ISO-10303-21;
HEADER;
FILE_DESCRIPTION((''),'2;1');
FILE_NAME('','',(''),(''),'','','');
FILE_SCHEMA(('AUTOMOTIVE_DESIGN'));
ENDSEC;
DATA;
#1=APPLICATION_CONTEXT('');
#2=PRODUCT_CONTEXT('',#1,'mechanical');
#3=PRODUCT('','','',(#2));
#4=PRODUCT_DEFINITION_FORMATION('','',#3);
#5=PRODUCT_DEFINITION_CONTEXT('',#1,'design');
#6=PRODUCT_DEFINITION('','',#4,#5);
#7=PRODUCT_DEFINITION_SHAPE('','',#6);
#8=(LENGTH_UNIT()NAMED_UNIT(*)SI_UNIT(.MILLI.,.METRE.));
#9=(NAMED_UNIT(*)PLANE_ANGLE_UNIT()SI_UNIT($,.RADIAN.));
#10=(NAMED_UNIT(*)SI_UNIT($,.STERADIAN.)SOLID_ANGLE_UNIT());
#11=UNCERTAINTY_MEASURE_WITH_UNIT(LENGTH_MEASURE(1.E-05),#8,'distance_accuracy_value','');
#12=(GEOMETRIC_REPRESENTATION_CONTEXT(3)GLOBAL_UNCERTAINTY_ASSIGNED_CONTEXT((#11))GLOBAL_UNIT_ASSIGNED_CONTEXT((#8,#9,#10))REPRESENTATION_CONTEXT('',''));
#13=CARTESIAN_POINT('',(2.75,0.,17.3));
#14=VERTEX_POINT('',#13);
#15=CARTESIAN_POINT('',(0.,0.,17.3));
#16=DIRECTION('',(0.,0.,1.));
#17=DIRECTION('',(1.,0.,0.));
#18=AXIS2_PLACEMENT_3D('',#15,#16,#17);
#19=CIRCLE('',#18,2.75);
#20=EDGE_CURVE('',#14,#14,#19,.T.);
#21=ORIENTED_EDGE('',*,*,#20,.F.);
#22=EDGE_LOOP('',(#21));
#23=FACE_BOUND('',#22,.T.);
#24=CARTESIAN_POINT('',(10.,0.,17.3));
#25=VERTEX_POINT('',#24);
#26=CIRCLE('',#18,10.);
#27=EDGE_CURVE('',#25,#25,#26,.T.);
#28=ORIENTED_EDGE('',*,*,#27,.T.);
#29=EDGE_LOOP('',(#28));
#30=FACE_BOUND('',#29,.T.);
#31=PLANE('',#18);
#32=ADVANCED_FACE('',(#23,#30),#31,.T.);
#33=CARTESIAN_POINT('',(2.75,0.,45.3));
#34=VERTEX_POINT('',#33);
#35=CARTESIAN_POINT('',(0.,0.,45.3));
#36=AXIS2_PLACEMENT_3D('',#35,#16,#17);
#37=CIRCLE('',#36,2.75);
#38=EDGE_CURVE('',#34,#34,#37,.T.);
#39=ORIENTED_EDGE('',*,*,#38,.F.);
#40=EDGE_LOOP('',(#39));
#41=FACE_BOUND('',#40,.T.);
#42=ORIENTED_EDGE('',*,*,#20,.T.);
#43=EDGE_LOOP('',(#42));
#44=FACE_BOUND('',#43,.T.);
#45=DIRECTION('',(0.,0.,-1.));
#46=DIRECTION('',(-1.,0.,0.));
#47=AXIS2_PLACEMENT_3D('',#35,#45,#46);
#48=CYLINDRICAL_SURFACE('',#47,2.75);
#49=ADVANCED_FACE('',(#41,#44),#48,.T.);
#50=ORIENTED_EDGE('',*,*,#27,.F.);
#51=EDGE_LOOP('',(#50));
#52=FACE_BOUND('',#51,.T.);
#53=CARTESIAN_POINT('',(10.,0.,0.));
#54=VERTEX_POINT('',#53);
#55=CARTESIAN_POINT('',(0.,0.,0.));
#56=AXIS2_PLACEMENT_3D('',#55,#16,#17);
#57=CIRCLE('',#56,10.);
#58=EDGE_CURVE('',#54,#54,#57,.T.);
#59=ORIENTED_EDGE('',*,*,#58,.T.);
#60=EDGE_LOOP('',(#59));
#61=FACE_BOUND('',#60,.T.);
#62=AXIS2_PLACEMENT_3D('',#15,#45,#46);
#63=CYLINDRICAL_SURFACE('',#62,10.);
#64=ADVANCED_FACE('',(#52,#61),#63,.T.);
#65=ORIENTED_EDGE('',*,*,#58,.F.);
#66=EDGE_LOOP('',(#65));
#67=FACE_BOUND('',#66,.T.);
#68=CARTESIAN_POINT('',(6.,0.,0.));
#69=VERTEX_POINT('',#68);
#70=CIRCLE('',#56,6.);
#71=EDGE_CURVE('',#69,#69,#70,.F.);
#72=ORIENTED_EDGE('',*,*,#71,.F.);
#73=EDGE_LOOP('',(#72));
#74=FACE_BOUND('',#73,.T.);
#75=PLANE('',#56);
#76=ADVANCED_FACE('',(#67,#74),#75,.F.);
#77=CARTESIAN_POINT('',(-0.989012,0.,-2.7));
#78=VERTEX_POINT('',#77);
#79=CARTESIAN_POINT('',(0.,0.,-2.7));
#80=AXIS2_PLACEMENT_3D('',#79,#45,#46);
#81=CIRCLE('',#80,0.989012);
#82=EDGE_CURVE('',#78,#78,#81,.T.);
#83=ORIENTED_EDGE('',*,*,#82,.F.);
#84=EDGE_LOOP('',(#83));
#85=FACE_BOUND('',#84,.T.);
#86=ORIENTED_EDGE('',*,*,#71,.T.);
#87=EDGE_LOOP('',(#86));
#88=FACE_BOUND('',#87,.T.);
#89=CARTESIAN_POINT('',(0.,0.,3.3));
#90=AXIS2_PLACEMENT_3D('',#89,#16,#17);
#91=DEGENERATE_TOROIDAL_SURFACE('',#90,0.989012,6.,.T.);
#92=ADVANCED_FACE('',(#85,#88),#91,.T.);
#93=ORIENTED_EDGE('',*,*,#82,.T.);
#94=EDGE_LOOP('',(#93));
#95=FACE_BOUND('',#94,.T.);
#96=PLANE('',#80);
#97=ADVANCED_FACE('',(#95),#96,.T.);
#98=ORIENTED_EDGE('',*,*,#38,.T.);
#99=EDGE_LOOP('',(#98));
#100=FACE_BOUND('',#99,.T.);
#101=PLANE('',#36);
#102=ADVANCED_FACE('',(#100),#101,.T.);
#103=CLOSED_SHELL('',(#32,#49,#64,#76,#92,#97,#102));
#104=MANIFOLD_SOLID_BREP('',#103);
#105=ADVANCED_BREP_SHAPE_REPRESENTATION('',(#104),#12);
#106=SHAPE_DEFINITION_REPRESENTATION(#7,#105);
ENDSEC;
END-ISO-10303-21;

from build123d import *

# Parameters (mm, degrees)
ESQUISSE1_R        = 10
BOSS_EXTRU_1_DEPTH = 17.3
ESQUISSE2_R        = 2.75
BOSS_EXTRU_2_DEPTH = 28
ESQUISSE3_R        = 6
BOSS_EXTRU_3_DEPTH = 2.7
CONG_2_R           = 6


with BuildPart() as part:
    # Esquisse1 → Boss.-Extru.1 (new body)
    with BuildSketch(Plane.XY):
        Circle(ESQUISSE1_R)
    extrude(amount=BOSS_EXTRU_1_DEPTH)

    # Esquisse2 → Boss.-Extru.2 (add)
    with BuildSketch(Plane.XY.offset(17.3)):
        Circle(ESQUISSE2_R)
    extrude(amount=BOSS_EXTRU_2_DEPTH)

    # Esquisse3 → Boss.-Extru.3 (add)
    with BuildSketch(Plane(origin=(0, 0, 0), x_dir=(-1, 0, 0), z_dir=(0, 0, -1))):
        with Locations(Location((0, 0, 0), (0, 0, 180))):
            Circle(ESQUISSE3_R)
    extrude(amount=BOSS_EXTRU_3_DEPTH)

    # Congé2
    # the kernel refuses this fillet: 6 mm, written as the material it takes off along each edge
    with BuildSketch(Plane(origin=(0, 0, -2.7), x_dir=(1, 0, 0), z_dir=(0, 1, 0))) as cong_2_piece_1:
        with BuildLine():
            CenterArc((0.989012073, -6), CONG_2_R, 33.367012969, 56.632987031)
            Line((0.989012073, 0), (0.989012073, 0.12))
            Line((0.989012073, 0.12), (6, 0.12))
            Line((6, 0.12), (6.12, 0))
            ThreePointArc((6.12, 0), (6.12, -1.35), (6.100219759, -2.634))
            Line((6.100219759, -2.634), (6, -2.7))
        make_face()
    revolve(axis=Axis((0, 0, -2.7), (0, 0, -1)), mode=Mode.SUBTRACT)


solid = part.part
